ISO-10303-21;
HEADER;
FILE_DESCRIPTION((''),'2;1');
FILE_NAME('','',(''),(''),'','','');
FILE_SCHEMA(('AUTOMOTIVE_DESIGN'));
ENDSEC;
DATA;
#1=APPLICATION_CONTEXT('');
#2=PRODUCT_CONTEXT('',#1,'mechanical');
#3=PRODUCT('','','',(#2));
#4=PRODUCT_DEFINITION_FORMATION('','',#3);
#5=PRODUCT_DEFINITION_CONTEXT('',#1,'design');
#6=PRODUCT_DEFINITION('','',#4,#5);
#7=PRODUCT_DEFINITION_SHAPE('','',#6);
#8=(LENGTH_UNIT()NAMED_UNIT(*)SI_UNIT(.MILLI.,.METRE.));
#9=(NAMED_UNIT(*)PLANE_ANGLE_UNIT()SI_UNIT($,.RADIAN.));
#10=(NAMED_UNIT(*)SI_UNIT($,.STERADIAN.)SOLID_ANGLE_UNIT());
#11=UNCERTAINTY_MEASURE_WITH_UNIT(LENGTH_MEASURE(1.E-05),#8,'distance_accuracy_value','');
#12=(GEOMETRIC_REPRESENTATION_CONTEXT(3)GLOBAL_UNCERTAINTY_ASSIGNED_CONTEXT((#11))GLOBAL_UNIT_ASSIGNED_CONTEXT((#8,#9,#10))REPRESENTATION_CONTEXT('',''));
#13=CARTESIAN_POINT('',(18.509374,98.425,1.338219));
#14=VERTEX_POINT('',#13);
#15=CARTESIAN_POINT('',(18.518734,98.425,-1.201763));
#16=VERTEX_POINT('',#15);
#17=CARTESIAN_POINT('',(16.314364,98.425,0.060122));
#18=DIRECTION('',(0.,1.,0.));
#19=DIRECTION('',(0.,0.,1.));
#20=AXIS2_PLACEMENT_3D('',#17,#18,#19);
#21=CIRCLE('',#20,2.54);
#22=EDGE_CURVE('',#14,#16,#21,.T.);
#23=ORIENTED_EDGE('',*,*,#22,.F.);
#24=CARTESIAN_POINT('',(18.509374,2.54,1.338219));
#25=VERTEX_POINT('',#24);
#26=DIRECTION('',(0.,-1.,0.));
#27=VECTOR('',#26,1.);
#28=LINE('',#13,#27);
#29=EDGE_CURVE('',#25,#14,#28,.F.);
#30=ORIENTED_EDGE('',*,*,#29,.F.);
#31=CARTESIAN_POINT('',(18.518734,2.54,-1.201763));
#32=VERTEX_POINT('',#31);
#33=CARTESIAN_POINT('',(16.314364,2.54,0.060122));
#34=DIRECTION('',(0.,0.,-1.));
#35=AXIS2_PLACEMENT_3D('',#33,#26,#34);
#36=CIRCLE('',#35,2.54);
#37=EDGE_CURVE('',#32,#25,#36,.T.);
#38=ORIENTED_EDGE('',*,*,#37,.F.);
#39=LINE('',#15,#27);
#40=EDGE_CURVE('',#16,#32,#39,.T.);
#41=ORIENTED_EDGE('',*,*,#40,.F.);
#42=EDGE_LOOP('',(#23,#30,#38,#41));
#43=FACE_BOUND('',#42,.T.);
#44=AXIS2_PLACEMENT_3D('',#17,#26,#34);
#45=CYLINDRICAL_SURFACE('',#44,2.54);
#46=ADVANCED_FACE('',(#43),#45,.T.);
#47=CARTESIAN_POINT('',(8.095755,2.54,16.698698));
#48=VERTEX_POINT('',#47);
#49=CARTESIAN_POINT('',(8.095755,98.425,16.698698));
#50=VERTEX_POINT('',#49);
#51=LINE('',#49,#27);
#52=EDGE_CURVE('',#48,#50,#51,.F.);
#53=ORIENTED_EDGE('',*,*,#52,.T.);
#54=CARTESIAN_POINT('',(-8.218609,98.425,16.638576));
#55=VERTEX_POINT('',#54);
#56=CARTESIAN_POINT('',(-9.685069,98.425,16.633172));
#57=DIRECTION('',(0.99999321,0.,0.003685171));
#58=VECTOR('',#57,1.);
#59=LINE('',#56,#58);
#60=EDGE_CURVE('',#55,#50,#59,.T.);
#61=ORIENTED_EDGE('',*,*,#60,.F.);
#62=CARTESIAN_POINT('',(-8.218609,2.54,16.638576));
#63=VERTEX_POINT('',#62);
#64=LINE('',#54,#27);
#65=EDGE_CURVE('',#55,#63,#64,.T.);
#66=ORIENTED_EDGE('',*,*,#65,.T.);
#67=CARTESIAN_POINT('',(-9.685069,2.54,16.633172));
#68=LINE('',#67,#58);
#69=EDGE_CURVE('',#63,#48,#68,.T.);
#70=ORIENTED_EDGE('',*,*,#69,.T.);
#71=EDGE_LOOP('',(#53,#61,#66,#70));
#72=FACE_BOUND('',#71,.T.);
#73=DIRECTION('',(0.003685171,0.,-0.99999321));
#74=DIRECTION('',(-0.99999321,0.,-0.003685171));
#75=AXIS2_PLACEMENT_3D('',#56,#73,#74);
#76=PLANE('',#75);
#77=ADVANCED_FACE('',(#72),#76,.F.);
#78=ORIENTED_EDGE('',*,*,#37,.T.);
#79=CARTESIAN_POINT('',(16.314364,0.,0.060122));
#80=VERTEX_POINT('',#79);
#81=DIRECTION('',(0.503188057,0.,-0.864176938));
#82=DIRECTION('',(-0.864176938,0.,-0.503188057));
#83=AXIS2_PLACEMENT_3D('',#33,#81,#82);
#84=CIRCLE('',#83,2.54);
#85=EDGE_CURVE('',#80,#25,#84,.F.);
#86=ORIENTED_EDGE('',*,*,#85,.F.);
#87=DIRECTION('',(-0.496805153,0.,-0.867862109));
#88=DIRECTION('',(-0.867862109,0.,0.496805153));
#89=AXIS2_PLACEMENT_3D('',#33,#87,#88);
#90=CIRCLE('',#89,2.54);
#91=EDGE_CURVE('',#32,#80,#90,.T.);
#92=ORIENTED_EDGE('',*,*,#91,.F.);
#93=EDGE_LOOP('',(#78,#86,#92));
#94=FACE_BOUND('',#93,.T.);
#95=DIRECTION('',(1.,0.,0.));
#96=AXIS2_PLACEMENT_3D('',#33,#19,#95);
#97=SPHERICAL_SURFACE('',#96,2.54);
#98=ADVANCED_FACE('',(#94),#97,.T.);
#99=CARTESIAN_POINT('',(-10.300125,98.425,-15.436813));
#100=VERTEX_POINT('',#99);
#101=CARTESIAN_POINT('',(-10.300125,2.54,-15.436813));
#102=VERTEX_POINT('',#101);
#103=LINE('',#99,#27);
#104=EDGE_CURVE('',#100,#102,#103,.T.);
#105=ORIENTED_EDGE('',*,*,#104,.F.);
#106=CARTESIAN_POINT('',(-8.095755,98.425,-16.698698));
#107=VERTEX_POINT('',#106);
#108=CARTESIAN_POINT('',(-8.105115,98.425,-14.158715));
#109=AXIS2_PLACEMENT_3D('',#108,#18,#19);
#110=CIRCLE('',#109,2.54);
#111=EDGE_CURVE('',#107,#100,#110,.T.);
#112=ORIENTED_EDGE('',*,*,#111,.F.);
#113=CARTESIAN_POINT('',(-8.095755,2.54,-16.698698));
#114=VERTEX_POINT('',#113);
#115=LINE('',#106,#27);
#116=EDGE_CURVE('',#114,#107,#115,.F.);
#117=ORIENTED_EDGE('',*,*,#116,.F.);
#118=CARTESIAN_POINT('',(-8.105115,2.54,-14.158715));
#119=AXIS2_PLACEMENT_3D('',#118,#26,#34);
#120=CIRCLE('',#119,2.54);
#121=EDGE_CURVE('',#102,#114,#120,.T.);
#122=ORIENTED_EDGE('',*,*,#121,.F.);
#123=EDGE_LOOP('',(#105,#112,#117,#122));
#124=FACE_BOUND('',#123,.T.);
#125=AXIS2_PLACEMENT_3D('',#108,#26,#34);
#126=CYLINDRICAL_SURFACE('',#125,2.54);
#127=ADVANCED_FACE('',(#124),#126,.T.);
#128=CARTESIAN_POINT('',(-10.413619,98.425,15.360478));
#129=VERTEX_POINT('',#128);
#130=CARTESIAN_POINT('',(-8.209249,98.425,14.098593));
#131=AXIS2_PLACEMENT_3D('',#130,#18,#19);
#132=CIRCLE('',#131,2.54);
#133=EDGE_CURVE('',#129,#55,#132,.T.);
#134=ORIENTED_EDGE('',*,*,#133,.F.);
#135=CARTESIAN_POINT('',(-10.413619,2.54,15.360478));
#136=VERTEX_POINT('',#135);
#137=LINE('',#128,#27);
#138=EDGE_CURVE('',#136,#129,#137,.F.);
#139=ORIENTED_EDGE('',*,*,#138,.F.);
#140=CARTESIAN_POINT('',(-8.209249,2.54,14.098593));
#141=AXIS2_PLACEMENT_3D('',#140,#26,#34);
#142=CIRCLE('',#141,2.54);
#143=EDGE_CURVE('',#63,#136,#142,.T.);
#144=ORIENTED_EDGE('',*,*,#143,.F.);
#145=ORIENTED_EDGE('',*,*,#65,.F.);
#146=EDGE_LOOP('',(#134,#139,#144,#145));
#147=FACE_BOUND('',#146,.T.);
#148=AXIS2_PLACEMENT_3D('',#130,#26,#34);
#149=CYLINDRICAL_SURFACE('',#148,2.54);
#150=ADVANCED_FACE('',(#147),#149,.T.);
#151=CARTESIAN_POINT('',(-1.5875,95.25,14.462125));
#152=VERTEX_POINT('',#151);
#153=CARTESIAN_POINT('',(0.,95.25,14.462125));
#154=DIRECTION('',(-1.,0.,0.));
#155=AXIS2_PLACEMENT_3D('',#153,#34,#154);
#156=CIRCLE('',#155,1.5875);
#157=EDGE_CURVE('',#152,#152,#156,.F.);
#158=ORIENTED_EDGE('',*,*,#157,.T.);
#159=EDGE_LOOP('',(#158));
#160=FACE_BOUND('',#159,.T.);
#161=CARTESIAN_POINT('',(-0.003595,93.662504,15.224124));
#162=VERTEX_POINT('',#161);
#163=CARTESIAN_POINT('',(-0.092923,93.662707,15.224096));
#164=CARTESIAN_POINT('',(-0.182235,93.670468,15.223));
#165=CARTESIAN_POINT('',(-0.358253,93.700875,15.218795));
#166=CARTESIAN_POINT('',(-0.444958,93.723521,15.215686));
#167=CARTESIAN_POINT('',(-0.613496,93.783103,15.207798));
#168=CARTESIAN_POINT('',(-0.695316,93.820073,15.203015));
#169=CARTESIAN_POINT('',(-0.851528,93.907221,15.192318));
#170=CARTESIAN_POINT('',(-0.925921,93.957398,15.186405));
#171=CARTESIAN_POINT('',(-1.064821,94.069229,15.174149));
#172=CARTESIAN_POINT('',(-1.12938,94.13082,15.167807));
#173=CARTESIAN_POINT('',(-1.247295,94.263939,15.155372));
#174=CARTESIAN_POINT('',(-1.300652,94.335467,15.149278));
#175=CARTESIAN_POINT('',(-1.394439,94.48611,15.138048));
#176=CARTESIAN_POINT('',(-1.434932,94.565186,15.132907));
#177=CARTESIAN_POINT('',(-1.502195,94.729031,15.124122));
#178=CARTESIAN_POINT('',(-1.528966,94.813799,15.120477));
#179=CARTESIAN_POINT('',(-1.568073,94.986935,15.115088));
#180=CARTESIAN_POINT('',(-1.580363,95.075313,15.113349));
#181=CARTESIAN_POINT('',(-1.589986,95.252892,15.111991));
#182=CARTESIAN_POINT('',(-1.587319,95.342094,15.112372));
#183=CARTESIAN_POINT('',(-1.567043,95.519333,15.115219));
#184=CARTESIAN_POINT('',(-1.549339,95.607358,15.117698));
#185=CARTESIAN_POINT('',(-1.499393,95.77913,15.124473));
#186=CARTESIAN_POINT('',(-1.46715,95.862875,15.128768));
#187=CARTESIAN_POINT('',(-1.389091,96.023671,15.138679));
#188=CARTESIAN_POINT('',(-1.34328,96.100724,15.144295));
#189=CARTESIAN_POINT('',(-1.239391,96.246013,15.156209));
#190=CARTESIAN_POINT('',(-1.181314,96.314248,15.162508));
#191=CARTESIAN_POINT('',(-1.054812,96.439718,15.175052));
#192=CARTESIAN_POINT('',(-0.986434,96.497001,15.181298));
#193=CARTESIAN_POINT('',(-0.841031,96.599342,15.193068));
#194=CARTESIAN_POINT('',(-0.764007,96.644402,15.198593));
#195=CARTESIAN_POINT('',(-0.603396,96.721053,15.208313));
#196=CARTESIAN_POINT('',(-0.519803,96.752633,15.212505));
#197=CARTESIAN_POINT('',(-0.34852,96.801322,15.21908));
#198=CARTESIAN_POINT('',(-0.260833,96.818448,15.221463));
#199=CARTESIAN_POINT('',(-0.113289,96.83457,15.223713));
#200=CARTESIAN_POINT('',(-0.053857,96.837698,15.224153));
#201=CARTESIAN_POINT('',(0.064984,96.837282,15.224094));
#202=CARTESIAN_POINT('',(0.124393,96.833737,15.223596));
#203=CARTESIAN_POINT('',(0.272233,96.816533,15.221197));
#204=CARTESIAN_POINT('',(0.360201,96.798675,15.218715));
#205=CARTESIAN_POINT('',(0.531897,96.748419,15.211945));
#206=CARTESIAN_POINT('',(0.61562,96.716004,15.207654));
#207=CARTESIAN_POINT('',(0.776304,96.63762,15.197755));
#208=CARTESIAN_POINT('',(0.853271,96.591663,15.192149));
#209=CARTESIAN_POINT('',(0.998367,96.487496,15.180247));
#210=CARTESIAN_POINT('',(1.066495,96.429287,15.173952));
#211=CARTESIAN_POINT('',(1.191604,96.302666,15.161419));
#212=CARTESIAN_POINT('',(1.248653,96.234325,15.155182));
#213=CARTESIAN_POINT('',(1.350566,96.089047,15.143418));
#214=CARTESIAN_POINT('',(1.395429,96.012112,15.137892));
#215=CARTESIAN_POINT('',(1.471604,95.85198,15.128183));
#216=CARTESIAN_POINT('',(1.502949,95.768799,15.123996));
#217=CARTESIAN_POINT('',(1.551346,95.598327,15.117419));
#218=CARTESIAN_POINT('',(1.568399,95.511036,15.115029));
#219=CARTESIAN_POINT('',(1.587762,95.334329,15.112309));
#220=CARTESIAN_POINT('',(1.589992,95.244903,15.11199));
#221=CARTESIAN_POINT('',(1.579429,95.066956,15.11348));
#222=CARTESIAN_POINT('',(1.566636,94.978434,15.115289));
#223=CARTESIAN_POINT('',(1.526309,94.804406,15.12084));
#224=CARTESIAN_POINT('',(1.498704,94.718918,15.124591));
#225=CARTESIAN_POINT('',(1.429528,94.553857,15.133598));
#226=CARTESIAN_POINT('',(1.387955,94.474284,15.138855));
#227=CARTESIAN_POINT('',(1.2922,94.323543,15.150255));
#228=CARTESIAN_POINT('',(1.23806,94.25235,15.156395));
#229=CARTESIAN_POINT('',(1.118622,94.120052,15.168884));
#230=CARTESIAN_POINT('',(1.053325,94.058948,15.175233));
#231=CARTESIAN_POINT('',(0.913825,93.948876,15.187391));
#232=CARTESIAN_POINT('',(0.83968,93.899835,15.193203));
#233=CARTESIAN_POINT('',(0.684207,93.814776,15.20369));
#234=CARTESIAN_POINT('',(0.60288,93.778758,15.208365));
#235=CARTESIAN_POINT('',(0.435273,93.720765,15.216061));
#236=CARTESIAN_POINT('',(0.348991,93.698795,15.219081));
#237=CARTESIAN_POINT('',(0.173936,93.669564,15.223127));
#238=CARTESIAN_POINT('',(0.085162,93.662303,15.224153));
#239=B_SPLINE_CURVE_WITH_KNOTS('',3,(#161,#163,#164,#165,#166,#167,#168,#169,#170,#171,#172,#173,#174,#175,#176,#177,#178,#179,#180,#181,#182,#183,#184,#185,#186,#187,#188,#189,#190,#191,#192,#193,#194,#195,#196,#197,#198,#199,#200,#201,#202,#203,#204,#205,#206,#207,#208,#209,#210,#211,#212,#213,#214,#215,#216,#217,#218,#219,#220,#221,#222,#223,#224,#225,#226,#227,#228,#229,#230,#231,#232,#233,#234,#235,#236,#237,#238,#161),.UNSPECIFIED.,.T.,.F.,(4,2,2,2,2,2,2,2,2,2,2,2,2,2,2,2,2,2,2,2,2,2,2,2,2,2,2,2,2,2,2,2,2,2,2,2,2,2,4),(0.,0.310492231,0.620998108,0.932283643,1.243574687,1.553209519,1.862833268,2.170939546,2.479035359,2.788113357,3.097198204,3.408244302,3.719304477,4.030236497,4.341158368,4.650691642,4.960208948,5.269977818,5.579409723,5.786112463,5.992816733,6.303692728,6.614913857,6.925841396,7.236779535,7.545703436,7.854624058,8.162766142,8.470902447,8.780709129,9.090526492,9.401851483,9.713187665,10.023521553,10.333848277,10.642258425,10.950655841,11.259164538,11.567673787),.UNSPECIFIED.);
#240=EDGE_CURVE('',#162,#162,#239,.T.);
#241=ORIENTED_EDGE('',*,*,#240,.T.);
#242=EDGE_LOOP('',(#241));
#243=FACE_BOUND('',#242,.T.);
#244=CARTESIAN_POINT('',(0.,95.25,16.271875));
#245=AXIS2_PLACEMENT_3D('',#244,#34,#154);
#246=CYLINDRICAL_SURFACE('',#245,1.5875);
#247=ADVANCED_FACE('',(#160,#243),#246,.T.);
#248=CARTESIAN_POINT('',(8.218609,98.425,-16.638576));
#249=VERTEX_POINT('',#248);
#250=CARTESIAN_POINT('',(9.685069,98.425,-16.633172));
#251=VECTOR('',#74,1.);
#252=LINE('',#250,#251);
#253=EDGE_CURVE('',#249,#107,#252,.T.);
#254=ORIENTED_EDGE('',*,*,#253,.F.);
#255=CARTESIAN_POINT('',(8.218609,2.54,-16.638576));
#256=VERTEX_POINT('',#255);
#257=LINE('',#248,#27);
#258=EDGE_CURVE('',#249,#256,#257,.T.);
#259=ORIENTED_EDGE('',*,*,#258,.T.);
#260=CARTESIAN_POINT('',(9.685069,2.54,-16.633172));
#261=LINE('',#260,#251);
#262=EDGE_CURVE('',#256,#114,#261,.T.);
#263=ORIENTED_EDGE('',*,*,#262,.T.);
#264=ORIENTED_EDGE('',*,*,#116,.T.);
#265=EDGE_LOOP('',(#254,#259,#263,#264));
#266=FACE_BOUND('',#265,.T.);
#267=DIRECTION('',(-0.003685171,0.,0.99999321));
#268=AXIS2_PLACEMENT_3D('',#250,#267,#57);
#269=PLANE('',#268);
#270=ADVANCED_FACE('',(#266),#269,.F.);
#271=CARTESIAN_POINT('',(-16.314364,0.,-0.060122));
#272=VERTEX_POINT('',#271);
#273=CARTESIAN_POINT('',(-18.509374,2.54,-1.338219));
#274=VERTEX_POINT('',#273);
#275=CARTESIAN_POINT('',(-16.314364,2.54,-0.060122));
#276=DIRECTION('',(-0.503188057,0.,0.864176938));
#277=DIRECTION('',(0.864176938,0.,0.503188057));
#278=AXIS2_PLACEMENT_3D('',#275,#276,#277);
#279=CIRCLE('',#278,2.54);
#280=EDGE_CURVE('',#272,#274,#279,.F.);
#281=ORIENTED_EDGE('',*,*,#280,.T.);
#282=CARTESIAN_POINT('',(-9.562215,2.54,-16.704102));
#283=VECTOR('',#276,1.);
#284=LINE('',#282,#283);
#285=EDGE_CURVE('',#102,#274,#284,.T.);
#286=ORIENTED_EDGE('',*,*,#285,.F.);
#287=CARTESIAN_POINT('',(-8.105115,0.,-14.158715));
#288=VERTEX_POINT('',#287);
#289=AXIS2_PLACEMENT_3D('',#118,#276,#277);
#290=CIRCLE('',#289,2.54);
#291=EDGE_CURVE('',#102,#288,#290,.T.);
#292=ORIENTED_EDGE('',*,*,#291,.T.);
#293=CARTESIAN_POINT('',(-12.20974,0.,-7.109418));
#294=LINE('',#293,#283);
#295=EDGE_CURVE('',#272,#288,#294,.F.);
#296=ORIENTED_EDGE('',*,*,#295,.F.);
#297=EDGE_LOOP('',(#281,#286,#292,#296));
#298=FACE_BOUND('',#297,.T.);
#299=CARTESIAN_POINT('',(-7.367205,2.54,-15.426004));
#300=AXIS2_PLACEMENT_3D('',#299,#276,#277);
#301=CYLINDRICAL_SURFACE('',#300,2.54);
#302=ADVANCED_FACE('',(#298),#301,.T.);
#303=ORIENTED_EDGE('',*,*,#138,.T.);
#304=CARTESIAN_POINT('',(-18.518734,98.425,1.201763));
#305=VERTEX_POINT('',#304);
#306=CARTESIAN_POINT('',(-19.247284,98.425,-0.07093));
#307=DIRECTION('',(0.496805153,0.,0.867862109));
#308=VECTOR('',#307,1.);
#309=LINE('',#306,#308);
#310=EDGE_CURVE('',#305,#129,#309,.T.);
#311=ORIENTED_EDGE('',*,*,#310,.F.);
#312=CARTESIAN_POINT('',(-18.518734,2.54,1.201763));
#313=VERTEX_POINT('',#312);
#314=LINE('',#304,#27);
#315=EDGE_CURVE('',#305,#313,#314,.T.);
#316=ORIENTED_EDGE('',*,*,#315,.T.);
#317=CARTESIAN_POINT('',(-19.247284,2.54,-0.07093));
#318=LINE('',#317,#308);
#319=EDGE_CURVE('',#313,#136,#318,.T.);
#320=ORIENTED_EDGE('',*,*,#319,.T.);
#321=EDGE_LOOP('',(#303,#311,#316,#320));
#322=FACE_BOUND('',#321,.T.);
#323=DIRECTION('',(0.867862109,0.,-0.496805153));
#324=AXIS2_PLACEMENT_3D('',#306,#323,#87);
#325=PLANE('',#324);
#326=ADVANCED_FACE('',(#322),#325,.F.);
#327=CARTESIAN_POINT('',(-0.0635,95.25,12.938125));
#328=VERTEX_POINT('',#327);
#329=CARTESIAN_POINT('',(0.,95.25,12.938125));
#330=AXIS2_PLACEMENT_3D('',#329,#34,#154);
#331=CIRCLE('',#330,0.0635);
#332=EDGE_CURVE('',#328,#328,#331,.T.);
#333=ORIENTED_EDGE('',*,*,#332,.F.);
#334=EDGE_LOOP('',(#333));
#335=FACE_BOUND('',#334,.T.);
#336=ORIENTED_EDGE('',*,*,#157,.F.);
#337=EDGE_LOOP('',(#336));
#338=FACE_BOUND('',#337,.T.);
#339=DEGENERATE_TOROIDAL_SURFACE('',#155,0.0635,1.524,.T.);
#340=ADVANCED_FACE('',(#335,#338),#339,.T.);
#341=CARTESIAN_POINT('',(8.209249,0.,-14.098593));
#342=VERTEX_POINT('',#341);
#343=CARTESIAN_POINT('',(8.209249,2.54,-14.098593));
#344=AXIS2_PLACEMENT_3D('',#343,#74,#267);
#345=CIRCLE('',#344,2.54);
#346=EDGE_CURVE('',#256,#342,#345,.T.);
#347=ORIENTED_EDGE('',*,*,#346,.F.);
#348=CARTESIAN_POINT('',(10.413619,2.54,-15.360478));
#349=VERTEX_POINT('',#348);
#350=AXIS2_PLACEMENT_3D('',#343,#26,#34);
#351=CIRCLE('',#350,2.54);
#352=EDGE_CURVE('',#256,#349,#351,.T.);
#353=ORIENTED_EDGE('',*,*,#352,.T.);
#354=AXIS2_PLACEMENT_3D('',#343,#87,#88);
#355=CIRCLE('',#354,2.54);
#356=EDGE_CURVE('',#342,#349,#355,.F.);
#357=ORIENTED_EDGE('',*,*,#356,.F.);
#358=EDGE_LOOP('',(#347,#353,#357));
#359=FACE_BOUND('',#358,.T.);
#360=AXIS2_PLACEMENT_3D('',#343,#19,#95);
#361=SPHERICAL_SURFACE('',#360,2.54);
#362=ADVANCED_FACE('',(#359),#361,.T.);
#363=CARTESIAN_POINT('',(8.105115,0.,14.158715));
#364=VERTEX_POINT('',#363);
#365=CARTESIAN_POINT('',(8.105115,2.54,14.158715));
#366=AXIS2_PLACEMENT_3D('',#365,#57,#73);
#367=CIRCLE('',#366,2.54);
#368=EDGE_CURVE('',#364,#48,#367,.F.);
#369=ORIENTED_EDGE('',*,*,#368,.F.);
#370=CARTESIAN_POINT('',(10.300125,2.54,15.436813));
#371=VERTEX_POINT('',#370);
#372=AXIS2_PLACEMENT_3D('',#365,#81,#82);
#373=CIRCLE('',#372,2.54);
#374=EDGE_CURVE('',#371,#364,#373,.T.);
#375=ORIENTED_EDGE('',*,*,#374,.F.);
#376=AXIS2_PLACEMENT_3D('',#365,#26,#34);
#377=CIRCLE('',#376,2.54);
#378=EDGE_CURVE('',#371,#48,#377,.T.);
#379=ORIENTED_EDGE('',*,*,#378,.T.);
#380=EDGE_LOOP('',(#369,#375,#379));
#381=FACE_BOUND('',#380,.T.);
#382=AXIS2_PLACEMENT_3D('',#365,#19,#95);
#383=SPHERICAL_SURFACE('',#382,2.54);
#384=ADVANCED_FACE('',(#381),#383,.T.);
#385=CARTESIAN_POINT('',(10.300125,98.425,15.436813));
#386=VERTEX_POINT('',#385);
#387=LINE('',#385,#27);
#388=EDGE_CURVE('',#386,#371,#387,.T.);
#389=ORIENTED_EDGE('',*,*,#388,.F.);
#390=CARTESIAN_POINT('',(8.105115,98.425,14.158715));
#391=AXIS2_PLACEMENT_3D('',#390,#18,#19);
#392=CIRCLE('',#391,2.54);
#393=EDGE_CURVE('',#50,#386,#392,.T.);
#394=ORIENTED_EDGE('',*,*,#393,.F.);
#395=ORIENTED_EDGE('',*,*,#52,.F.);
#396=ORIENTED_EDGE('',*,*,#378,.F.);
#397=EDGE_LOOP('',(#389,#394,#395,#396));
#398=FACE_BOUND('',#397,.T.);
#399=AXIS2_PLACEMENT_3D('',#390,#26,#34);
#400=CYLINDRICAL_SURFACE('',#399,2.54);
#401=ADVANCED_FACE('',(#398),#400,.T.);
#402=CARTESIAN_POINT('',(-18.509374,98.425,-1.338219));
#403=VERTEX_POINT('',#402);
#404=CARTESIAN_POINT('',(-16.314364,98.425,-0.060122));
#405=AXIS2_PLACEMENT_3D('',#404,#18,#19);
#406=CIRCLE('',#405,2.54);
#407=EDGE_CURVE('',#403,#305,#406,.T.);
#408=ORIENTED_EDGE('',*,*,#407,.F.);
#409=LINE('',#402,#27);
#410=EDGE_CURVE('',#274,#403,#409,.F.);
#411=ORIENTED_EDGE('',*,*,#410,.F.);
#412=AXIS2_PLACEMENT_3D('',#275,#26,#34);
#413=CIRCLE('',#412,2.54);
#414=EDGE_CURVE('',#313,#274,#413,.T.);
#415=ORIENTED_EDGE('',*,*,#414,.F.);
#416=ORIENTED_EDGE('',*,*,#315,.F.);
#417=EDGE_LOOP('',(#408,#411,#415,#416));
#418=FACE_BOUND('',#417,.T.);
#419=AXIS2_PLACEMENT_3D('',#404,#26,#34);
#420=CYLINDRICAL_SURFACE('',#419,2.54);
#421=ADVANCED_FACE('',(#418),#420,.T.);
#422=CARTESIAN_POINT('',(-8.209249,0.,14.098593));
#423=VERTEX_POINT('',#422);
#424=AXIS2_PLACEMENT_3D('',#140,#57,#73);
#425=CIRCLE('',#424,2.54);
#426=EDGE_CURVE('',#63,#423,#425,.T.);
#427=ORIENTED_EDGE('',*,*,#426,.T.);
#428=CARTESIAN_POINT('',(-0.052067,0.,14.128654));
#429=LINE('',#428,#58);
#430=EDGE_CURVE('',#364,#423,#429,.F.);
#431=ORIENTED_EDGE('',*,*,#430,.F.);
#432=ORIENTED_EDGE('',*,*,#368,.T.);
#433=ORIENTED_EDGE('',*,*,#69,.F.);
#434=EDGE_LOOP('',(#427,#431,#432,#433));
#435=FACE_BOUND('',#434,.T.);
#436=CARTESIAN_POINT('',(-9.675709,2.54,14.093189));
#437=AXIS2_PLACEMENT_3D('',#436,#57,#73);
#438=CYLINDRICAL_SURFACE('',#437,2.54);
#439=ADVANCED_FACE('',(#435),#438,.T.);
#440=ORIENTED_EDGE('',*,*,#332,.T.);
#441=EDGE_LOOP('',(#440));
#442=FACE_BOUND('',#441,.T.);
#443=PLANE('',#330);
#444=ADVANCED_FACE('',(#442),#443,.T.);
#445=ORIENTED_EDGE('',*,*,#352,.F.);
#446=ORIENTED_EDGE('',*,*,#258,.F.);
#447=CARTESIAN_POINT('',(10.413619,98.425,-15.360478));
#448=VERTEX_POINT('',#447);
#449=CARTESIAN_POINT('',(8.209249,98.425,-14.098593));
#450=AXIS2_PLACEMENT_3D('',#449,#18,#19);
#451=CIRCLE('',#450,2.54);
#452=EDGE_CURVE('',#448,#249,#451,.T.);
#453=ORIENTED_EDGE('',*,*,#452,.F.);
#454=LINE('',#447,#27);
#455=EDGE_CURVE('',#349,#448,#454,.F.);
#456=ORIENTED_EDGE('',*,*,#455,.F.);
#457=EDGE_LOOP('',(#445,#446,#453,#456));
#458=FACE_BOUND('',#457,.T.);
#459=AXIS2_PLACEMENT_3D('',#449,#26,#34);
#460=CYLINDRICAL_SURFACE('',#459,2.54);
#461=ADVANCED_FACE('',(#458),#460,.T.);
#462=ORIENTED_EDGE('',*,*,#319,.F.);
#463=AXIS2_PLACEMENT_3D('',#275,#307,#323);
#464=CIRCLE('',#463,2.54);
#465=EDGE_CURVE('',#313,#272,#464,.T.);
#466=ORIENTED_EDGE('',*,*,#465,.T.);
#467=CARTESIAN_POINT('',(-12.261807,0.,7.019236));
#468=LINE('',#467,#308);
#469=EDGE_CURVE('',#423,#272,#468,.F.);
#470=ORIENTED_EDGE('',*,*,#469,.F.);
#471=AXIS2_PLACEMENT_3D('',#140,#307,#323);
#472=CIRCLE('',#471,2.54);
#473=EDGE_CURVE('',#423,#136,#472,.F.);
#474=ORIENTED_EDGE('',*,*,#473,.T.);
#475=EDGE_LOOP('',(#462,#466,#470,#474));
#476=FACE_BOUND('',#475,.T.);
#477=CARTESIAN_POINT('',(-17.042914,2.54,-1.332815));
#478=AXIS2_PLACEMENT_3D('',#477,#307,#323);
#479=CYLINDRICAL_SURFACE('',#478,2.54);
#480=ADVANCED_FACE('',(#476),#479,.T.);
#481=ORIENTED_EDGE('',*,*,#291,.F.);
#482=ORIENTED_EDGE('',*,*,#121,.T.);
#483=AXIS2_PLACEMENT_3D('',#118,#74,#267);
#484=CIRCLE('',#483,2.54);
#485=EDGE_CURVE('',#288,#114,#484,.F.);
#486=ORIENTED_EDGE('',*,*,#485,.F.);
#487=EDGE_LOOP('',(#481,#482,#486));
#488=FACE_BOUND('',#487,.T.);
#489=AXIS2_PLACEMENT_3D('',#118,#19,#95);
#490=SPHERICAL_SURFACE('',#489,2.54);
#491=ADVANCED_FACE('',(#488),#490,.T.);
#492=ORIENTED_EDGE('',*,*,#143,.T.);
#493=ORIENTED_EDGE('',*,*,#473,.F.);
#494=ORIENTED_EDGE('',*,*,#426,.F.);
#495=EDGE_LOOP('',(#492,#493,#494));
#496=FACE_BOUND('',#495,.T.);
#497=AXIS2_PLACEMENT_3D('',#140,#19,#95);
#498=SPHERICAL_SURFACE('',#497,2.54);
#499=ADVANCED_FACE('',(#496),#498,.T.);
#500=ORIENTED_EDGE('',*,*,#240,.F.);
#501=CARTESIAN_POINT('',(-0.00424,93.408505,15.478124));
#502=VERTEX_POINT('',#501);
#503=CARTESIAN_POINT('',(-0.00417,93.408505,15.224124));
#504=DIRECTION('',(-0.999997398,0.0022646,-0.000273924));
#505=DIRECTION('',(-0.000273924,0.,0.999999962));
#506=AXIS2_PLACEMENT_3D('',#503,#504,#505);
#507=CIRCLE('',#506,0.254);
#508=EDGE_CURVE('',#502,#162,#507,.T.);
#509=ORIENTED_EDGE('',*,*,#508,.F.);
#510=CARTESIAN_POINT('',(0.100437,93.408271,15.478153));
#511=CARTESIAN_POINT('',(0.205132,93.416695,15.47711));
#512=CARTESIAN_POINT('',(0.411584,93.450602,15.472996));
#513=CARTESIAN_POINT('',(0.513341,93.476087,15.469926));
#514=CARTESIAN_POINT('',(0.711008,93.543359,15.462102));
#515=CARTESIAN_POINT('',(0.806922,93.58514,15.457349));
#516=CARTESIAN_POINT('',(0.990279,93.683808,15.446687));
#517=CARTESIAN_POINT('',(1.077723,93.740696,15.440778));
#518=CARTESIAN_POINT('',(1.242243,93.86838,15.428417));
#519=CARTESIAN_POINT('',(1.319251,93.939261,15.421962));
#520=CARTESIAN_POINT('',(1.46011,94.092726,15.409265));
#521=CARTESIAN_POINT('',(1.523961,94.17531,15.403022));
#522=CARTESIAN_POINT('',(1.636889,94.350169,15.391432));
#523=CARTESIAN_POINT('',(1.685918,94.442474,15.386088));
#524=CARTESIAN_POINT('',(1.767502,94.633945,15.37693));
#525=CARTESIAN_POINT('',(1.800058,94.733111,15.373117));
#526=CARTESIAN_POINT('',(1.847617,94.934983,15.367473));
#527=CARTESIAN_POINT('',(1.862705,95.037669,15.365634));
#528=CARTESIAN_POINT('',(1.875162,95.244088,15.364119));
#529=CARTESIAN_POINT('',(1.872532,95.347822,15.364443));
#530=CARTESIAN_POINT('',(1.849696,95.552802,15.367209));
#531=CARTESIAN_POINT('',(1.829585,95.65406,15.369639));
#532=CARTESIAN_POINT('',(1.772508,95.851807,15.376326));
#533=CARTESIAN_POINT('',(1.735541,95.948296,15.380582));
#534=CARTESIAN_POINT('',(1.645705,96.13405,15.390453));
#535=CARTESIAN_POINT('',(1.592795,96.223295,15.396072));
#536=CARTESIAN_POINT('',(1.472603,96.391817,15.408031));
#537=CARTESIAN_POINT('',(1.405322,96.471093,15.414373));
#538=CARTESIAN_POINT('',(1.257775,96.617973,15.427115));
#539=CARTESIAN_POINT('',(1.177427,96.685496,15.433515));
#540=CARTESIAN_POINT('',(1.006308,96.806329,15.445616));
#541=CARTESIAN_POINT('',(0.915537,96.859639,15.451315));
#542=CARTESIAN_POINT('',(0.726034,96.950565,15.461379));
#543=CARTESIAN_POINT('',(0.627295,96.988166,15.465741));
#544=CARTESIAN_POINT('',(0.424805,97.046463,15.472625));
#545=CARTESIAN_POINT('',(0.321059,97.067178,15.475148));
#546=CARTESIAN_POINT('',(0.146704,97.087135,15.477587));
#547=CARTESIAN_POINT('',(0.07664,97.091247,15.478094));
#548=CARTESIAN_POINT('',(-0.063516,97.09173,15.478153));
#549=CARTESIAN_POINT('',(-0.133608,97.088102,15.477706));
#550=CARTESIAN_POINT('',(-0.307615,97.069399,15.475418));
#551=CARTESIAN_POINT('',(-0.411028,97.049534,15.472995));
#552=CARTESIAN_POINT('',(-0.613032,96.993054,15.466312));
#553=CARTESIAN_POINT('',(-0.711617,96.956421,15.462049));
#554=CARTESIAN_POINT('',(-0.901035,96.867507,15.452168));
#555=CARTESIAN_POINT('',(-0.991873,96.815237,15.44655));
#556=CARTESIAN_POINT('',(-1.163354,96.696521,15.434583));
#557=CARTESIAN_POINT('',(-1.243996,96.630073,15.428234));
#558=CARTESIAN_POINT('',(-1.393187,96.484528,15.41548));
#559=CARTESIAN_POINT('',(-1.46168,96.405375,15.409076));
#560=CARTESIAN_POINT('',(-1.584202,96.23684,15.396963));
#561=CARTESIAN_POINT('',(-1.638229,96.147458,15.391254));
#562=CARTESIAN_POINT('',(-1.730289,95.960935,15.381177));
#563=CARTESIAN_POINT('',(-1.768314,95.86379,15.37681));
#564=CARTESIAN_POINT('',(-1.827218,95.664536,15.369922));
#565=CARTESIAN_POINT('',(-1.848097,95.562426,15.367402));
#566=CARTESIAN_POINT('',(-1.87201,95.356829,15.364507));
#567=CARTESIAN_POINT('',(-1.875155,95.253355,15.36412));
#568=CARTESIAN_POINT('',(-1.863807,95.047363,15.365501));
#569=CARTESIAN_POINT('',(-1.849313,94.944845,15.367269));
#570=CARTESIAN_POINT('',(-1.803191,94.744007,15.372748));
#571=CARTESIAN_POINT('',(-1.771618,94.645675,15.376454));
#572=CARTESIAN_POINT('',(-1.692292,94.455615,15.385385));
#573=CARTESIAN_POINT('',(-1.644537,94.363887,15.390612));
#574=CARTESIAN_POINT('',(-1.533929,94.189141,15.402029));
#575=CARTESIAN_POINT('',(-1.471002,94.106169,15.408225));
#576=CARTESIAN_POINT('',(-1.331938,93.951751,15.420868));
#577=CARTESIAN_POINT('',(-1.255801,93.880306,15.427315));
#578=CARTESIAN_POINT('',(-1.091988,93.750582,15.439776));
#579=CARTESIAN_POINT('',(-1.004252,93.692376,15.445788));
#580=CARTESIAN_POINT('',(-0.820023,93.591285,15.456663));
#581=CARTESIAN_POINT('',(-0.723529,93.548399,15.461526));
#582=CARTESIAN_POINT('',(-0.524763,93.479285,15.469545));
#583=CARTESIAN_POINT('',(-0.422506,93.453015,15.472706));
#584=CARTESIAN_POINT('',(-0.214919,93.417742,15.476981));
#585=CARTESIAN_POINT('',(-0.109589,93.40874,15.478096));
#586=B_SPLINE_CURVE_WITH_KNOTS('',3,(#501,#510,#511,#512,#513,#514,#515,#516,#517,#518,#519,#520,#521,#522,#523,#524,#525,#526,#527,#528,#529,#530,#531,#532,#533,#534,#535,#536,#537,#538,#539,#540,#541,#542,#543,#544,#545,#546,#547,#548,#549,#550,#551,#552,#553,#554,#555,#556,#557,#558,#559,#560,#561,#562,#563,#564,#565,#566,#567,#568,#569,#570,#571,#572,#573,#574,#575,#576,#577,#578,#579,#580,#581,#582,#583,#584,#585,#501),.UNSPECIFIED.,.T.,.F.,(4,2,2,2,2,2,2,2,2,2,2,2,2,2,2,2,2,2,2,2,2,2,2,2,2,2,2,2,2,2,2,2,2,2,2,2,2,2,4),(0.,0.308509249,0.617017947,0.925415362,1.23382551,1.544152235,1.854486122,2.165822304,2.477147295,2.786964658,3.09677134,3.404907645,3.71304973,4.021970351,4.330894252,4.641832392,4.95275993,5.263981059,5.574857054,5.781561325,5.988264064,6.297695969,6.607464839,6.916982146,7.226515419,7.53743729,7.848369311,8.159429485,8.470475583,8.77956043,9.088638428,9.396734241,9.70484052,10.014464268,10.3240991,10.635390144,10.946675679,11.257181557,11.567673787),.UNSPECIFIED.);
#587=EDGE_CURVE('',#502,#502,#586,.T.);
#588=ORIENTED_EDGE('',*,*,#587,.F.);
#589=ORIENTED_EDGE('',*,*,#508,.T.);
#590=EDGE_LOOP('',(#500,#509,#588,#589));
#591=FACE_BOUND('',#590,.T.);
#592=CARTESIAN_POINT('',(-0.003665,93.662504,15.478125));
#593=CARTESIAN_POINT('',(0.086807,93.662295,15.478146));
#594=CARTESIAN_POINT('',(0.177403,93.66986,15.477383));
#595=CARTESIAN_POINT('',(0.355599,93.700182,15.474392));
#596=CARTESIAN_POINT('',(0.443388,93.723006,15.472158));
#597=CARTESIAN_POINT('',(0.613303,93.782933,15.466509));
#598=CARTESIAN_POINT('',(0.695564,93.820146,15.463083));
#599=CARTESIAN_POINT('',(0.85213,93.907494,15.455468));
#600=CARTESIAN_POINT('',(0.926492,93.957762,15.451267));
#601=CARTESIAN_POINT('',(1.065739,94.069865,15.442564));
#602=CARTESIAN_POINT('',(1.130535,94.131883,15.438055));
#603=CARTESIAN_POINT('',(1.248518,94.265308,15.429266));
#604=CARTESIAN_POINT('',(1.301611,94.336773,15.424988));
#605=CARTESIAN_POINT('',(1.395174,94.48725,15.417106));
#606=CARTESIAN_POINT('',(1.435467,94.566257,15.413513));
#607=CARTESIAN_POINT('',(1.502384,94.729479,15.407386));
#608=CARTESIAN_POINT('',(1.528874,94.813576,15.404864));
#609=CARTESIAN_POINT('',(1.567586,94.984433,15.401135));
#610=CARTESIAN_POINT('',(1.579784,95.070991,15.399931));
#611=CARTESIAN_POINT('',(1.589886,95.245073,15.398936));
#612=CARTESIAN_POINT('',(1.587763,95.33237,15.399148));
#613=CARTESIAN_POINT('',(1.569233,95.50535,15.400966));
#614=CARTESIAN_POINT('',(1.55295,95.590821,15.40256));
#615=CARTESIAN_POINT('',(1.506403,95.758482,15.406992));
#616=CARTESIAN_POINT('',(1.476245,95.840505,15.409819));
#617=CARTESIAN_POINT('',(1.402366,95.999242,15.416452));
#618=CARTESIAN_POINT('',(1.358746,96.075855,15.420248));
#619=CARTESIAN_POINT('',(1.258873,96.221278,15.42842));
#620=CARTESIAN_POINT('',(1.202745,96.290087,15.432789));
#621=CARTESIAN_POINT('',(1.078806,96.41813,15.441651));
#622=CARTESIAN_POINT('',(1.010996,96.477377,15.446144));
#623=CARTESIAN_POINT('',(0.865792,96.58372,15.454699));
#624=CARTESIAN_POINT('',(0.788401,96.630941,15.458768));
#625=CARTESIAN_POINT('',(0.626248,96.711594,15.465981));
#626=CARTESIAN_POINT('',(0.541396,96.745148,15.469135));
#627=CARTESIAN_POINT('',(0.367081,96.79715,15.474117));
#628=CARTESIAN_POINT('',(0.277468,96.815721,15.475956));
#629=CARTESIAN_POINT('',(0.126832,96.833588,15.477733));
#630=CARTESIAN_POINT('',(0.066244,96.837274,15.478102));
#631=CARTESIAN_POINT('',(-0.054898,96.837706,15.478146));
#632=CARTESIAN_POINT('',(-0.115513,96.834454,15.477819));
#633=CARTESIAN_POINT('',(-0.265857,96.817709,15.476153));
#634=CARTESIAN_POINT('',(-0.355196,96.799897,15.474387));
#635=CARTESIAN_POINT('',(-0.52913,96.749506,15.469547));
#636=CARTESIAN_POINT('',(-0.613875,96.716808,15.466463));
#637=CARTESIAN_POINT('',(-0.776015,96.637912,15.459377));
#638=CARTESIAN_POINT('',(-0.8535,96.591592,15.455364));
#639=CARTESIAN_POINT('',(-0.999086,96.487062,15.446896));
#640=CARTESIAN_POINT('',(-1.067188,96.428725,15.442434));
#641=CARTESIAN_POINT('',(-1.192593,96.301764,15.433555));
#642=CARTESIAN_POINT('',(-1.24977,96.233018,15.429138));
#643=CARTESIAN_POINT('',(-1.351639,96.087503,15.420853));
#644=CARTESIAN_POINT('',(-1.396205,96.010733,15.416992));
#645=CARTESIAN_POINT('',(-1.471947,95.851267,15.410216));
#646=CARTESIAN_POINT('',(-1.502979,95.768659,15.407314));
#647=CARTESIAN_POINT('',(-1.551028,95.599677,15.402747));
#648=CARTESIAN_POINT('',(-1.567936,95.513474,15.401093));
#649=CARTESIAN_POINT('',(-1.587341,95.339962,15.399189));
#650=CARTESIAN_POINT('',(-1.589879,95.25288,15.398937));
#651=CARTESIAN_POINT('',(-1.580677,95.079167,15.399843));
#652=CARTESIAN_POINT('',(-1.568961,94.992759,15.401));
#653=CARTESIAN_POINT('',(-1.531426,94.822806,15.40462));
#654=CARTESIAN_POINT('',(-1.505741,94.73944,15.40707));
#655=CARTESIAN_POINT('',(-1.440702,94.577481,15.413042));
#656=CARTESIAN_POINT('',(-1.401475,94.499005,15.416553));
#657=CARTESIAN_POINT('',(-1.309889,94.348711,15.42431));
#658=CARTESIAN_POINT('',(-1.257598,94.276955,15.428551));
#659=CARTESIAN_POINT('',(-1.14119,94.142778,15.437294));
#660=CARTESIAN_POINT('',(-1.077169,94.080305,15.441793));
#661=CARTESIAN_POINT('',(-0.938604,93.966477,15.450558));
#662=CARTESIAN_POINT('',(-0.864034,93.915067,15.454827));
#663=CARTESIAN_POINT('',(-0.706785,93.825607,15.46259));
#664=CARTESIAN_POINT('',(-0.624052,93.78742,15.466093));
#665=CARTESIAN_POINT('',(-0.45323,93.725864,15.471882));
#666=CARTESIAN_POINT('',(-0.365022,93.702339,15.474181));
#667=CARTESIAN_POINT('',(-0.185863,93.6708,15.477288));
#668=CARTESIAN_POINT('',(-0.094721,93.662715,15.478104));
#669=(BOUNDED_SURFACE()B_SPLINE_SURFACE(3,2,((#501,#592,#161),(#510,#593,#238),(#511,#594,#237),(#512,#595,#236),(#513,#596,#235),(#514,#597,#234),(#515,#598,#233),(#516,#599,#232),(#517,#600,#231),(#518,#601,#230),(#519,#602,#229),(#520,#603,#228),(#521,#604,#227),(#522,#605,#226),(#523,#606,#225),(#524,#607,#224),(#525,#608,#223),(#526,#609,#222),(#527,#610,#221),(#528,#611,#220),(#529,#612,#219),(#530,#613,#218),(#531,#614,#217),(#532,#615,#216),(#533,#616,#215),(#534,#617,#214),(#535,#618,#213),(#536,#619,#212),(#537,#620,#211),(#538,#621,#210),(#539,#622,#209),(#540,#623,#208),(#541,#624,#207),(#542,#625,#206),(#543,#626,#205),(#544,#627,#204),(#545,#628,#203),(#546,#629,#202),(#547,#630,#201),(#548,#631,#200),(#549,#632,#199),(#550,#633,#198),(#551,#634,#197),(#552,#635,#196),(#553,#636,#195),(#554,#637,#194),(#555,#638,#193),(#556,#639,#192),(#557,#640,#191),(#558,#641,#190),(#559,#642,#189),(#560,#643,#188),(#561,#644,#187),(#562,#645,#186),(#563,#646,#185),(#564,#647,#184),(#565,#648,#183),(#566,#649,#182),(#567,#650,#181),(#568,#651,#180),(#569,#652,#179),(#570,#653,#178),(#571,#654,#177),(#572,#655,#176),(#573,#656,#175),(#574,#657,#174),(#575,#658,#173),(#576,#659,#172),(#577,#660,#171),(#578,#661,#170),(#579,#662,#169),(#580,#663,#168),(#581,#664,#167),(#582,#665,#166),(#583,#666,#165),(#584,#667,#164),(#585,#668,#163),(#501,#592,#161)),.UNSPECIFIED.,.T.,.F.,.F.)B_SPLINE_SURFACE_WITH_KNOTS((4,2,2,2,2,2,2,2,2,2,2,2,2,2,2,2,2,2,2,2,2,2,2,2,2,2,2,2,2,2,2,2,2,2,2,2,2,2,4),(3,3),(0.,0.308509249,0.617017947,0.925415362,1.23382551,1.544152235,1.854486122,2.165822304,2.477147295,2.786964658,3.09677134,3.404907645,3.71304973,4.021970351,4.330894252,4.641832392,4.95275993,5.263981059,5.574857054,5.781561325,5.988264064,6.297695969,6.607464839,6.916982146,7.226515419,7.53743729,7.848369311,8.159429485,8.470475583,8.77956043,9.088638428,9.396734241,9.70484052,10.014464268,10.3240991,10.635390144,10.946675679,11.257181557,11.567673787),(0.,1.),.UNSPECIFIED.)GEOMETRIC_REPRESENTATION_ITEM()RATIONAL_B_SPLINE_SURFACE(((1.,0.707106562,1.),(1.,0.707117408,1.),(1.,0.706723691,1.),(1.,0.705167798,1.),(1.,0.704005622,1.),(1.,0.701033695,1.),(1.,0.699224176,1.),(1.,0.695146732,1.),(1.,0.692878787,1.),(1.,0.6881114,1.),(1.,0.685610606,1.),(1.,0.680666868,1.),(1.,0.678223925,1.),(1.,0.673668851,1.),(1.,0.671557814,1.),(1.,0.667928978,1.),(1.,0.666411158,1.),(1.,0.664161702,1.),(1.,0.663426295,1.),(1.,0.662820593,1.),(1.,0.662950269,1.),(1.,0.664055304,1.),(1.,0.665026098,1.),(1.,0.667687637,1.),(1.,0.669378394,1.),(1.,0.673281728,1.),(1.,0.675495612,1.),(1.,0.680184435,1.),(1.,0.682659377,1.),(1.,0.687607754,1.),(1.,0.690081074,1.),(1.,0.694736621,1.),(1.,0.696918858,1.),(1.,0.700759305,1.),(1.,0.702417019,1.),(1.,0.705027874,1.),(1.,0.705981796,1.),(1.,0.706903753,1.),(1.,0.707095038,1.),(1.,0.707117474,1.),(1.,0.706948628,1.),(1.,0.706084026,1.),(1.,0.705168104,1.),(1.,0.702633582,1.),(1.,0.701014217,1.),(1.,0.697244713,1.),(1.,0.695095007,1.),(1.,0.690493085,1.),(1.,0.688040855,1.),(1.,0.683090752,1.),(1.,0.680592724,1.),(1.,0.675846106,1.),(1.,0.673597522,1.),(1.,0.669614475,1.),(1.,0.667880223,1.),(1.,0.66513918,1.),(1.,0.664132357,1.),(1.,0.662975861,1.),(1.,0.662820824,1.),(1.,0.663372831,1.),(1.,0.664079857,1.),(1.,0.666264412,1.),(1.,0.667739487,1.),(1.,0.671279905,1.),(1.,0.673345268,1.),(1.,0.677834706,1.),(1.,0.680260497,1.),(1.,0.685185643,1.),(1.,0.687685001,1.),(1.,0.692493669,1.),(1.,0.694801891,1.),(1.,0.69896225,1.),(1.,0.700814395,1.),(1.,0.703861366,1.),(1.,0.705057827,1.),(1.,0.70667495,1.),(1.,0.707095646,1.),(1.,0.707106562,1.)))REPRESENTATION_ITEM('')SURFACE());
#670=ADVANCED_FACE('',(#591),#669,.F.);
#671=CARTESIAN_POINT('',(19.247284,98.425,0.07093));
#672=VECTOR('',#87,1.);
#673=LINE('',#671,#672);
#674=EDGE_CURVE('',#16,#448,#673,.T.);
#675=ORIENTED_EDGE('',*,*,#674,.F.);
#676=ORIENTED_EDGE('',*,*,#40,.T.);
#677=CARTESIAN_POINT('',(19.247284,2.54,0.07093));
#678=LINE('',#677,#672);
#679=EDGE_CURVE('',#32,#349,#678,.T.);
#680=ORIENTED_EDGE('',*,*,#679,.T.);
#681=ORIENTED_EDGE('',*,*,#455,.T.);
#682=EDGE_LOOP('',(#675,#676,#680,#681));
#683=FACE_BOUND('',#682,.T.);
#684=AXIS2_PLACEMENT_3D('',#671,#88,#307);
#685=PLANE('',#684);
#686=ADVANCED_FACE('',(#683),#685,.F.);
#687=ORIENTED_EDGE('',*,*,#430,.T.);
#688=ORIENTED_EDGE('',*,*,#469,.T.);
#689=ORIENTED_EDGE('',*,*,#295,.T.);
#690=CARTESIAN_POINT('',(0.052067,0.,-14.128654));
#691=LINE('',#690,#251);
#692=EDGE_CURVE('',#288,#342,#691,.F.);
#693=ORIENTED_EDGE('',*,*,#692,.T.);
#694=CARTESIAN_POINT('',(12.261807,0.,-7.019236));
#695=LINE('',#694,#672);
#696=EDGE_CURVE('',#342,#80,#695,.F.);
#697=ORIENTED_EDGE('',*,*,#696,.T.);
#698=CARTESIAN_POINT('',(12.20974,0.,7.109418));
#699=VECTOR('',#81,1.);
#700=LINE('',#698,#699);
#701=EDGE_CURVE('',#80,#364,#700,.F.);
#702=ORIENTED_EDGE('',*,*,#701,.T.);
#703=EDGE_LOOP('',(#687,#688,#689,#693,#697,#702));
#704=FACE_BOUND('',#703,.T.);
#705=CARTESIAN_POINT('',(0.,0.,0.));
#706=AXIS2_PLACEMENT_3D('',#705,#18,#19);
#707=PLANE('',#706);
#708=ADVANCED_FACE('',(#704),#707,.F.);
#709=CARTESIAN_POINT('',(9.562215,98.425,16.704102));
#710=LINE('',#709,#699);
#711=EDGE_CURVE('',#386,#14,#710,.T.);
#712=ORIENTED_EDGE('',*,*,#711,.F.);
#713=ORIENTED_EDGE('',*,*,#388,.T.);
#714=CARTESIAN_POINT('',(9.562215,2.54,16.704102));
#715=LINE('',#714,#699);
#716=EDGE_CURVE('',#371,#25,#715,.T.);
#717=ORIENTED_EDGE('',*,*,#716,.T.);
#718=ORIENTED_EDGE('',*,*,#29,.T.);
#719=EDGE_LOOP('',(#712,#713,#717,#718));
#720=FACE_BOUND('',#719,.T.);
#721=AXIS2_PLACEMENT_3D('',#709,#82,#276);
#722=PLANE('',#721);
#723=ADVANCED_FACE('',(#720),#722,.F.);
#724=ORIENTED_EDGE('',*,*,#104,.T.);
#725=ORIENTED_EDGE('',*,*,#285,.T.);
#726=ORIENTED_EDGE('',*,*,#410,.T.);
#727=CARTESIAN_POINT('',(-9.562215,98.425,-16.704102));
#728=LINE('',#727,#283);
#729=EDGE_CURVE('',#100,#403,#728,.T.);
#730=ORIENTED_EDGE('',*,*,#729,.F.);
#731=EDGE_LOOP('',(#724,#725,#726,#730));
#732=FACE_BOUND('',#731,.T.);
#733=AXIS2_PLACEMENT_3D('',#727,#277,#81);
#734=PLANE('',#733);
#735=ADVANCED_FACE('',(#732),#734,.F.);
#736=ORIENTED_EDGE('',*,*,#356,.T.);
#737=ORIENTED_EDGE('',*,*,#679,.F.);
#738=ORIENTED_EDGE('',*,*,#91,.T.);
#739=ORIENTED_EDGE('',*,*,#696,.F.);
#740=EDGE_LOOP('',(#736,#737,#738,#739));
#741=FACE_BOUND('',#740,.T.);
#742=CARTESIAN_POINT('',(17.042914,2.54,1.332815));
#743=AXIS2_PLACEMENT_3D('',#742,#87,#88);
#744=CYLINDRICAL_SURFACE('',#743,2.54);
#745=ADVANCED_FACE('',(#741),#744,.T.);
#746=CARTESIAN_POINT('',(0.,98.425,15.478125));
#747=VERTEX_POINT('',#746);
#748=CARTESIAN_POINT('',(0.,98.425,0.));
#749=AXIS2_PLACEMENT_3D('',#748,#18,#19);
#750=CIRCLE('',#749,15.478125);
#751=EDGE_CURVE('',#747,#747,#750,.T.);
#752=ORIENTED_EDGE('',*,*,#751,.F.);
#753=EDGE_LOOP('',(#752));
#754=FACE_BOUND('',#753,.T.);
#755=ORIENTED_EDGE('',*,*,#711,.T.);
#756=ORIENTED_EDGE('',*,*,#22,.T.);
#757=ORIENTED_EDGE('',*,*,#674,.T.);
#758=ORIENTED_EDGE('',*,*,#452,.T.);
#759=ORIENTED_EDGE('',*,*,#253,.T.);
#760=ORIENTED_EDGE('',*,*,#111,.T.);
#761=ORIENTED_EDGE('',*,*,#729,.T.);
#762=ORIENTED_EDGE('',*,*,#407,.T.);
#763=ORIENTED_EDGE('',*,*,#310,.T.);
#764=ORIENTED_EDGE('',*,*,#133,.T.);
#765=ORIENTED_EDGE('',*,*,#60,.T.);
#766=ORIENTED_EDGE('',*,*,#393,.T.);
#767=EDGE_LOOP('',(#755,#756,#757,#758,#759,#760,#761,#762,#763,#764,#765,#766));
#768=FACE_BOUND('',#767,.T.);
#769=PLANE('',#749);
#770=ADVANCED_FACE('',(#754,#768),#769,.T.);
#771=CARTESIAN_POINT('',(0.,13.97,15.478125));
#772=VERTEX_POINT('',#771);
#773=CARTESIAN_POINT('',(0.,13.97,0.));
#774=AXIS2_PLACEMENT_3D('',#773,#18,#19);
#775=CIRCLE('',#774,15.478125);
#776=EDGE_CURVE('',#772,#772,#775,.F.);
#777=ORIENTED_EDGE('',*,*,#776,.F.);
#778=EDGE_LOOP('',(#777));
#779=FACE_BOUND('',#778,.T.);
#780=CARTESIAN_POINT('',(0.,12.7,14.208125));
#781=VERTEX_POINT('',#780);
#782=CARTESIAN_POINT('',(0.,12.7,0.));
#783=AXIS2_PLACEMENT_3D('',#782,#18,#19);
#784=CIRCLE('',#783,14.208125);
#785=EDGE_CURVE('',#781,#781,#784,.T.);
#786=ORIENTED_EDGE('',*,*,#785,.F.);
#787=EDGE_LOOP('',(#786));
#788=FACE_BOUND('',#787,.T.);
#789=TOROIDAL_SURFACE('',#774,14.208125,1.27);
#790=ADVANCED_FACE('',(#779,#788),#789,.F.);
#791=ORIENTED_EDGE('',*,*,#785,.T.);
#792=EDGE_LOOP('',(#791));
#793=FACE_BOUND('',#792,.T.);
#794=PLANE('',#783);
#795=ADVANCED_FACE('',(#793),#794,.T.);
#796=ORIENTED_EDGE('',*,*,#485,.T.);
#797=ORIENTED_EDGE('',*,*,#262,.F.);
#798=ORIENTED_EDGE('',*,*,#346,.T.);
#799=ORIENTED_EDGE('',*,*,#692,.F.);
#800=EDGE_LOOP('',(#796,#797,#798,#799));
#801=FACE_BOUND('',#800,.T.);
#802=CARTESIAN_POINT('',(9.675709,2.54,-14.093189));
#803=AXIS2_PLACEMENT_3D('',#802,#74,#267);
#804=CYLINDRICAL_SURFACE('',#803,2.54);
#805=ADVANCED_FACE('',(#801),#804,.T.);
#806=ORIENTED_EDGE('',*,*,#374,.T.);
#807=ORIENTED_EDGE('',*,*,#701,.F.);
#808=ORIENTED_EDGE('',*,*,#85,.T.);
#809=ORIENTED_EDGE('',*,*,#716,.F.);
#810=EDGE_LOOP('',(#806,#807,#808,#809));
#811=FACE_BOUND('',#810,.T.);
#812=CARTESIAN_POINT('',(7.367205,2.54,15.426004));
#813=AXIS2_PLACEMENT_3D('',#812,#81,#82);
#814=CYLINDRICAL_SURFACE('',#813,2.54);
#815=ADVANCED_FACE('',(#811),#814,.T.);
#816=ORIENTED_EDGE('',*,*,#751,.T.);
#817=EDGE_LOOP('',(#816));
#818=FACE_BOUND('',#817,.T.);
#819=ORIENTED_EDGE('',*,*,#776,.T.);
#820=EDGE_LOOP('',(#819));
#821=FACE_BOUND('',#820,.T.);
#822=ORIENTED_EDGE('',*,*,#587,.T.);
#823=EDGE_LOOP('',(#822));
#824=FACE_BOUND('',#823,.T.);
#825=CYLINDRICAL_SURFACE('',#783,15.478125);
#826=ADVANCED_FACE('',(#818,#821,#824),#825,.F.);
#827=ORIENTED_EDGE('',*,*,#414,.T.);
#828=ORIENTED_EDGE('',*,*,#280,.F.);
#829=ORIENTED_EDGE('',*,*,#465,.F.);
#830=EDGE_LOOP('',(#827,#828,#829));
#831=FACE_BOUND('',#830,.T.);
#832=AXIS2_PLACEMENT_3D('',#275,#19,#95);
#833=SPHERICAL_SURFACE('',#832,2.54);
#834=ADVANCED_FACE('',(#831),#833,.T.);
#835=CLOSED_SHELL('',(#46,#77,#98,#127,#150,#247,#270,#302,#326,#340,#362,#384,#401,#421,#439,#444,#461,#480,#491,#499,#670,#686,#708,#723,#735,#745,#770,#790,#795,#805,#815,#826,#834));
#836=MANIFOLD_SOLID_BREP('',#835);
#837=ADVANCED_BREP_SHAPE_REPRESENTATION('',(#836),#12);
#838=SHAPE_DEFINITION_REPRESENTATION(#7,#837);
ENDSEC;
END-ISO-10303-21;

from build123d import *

# Parameters (mm, degrees)
BOSS_EXTRUDE1_DEPTH      = 98.425
SKETCH3_R                = 15.478125
CUT_EXTRUDE1_DEPTH       = 85.725
FILLET1_R                = 1.27
FILLET2_R                = 2.54
FILLET3_R                = 2.54
BOSS_EXTRUDE3_DEPTH      = 0.79375
BOSS_EXTRUDE3_DEPTH_BACK = 3.175
SKETCH7_R                = 1.5875
CUT_EXTRUDE2_START       = -0.635
SKETCH8_R                = 1.5875
CUT_EXTRUDE2_DEPTH       = 0.635
FILLET4_R                = 1.524
FILLET5_R                = 0.254


with BuildPart() as part:
    # Sketch2 → Boss-Extrude1 (new body)
    with BuildSketch(Plane(origin=(0, 0, 0), x_dir=(1, 0, 0), z_dir=(0, 1, 0))):
        Polygon((9.562214756, -16.704101823), (19.247283904, -0.070930017), (9.685069148, 16.633171806), (-9.562214756, 16.704101823), (-19.247283904, 0.070930017), (-9.685069148, -16.633171806), align=None)
    extrude(amount=BOSS_EXTRUDE1_DEPTH)

    # Sketch3 → Cut-Extrude1 (cut)
    with BuildSketch(Plane(origin=(0, 98.425, 0), x_dir=(1, 0, 0), z_dir=(0, 1, 0))):
        with Locations(Location((0, 0, 0), (0, 0, 270))):
            Circle(SKETCH3_R)
    extrude(amount=-CUT_EXTRUDE1_DEPTH, mode=Mode.SUBTRACT)

    # Fillet1
    fillet1_edges = [part.edges().sort_by_distance(p)[0] for p in [
        (0, 12.7, -15.478125),
    ]]
    fillet(fillet1_edges, radius=FILLET1_R)

    # Fillet2
    fillet2_edges = [part.edges().sort_by_distance(p)[0] for p in [
        (-14.466176526, 0, 8.281120895),
        (-14.40474933, 0, -8.38751592),
        (0.061427196, 0, -16.668636815),
        (14.466176526, 0, -8.281120895),
        (14.40474933, 0, 8.38751592),
        (-0.061427196, 0, 16.668636815),
    ]]
    fillet(fillet2_edges, radius=FILLET2_R)

    # Fillet3
    # the kernel refuses this fillet: 2.54 mm, written as the material it takes off along each edge
    with BuildSketch(Plane(origin=(-16.314364452, 2.54, -0.060121633), x_dir=(-0.8678621088062781, 0, 0.49680515305129436), z_dir=(0, -1, 0))) as fillet3_piece_1_section:
        Polygon((0, 0), (FILLET3_R, 0), (FILLET3_R, FILLET3_R * 0.57735026919), (FILLET3_R * 0.5, FILLET3_R * 0.866025403784), align=None)
    fillet3_piece_1 = extrude(amount=FILLET3_R, mode=Mode.PRIVATE)
    fillet3_piece_1 = fillet3_piece_1 - Plane(origin=(-16.314364452, 2.54, -0.060121633), x_dir=(0.9999932097338184, 0, 0.003685171129701924), z_dir=(0, -1, 0)) * Sphere(FILLET3_R, mode=Mode.PRIVATE)
    add(fillet3_piece_1, mode=Mode.SUBTRACT)
    with BuildSketch(Plane(origin=(-8.105115364, 2.54, -14.158714879), x_dir=(0.003685171129702339, 0, -0.9999932097338186), z_dir=(0, -1, 0))) as fillet3_piece_2_section:
        Polygon((0, 0), (FILLET3_R, 0), (FILLET3_R, -FILLET3_R * 0.57735026919), (FILLET3_R * 0.5, -FILLET3_R * 0.866025403784), align=None)
    fillet3_piece_2 = extrude(amount=FILLET3_R, mode=Mode.PRIVATE)
    fillet3_piece_2 = fillet3_piece_2 - Plane(origin=(-8.105115364, 2.54, -14.158714879), x_dir=(0.49680515305129425, 0, 0.867862108806278), z_dir=(0, -1, 0)) * Sphere(FILLET3_R, mode=Mode.PRIVATE)
    add(fillet3_piece_2, mode=Mode.SUBTRACT)
    with BuildSketch(Plane(origin=(-8.209249088, 2.54, 14.098593245), x_dir=(-0.003685171129702708, 0, 0.9999932097338186), z_dir=(0, -1, 0))) as fillet3_piece_3_section:
        Polygon((0, 0), (FILLET3_R, 0), (FILLET3_R, FILLET3_R * 0.57735026919), (FILLET3_R * 0.5, FILLET3_R * 0.866025403784), align=None)
    fillet3_piece_3 = extrude(amount=FILLET3_R, mode=Mode.PRIVATE)
    fillet3_piece_3 = fillet3_piece_3 - Plane(origin=(-8.209249088, 2.54, 14.098593245), x_dir=(0.5031880566825245, 0, -0.8641769376765759), z_dir=(0, -1, 0)) * Sphere(FILLET3_R, mode=Mode.PRIVATE)
    add(fillet3_piece_3, mode=Mode.SUBTRACT)
    with BuildSketch(Plane(origin=(8.209249088, 2.54, -14.098593245), x_dir=(0.8678621088062781, 0, -0.49680515305129436), z_dir=(0, -1, 0))) as fillet3_piece_4_section:
        Polygon((0, 0), (FILLET3_R, 0), (FILLET3_R, -FILLET3_R * 0.57735026919), (FILLET3_R * 0.5, -FILLET3_R * 0.866025403784), align=None)
    fillet3_piece_4 = extrude(amount=FILLET3_R, mode=Mode.PRIVATE)
    fillet3_piece_4 = fillet3_piece_4 - Plane(origin=(8.209249088, 2.54, -14.098593245), x_dir=(-0.5031880566825243, 0, 0.8641769376765759), z_dir=(0, -1, 0)) * Sphere(FILLET3_R, mode=Mode.PRIVATE)
    add(fillet3_piece_4, mode=Mode.SUBTRACT)
    with BuildSketch(Plane(origin=(8.105115364, 2.54, 14.158714879), x_dir=(0.8641769376765761, 0, 0.5031880566825242), z_dir=(0, -1, 0))) as fillet3_piece_5_section:
        Polygon((0, 0), (FILLET3_R, 0), (FILLET3_R, FILLET3_R * 0.57735026919), (FILLET3_R * 0.5, FILLET3_R * 0.866025403784), align=None)
    fillet3_piece_5 = extrude(amount=FILLET3_R, mode=Mode.PRIVATE)
    fillet3_piece_5 = fillet3_piece_5 - Plane(origin=(8.105115364, 2.54, 14.158714879), x_dir=(-0.4968051530512941, 0, -0.8678621088062782), z_dir=(0, -1, 0)) * Sphere(FILLET3_R, mode=Mode.PRIVATE)
    add(fillet3_piece_5, mode=Mode.SUBTRACT)
    with BuildSketch(Plane(origin=(16.314364452, 2.54, 0.060121633), x_dir=(0.8641769376765761, 0, 0.5031880566825242), z_dir=(0, -1, 0))) as fillet3_piece_6_section:
        Polygon((0, 0), (FILLET3_R, 0), (FILLET3_R, -FILLET3_R * 0.57735026919), (FILLET3_R * 0.5, -FILLET3_R * 0.866025403784), align=None)
    fillet3_piece_6 = extrude(amount=FILLET3_R, mode=Mode.PRIVATE)
    fillet3_piece_6 = fillet3_piece_6 - Plane(origin=(16.314364452, 2.54, 0.060121633), x_dir=(-0.9999932097338184, 0, -0.003685171129701988), z_dir=(0, -1, 0)) * Sphere(FILLET3_R, mode=Mode.PRIVATE)
    add(fillet3_piece_6, mode=Mode.SUBTRACT)
    with BuildSketch(Plane(origin=(-9.685069148, 2.54, 16.633171806), x_dir=(0.9999932097338186, 0, 0.0036851711297037465), z_dir=(0, 1, 0)), Plane(origin=(-19.247283904, 2.54, -0.070930017), x_dir=(0.49680515305129397, 0, 0.8678621088062782), z_dir=(0, 1, 0)), Plane(origin=(9.562214756, 2.54, 16.704101823), x_dir=(0.5031880566825245, 0, -0.8641769376765758), z_dir=(0, 1, 0))) as fillet3_piece_7:
        with BuildLine():
            CenterArc((FILLET3_R * 0.57735026919, FILLET3_R), FILLET3_R, 210, 60)
            Line((-FILLET3_R * 0.288675134595, FILLET3_R * 0.5), (0, 0))
            Line((0, 0), (FILLET3_R * 0.57735026919, 0))
        make_face()
    extrude(amount=99.551174209, mode=Mode.SUBTRACT)
    with BuildSketch(Plane(origin=(-9.562214756, 2.54, -16.704101823), x_dir=(0.9999932097338186, 0, 0.003685171129701324), z_dir=(0, 1, 0)), Plane(origin=(9.685069148, 2.54, -16.633171806), x_dir=(0.4968051530512946, 0, 0.8678621088062779), z_dir=(0, 1, 0)), Plane(origin=(19.247283904, 2.54, 0.070930017), x_dir=(-0.503188056682524, 0, 0.8641769376765761), z_dir=(0, 1, 0))) as fillet3_piece_8:
        with BuildLine():
            CenterArc((FILLET3_R * 0.57735026919, -FILLET3_R), FILLET3_R, 90, 60)
            Line((-FILLET3_R * 0.288675134595, -FILLET3_R * 0.5), (0, 0))
            Line((0, 0), (FILLET3_R * 0.57735026919, 0))
        make_face()
    extrude(amount=99.551174209, mode=Mode.SUBTRACT)

    # Sketch7 → Boss-Extrude3 (add, two sides: drawn at the far end of the back side and taken through both)
    with BuildSketch(Plane.XY.offset(15.478125).offset(-BOSS_EXTRUDE3_DEPTH_BACK)):
        with Locations(Location((0, 95.25, 0), (0, 0, 270))):
            Circle(SKETCH7_R)
    extrude(amount=BOSS_EXTRUDE3_DEPTH + BOSS_EXTRUDE3_DEPTH_BACK)

    # Sketch8 → Cut-Extrude2 (cut)
    with BuildSketch(Plane(origin=(0, 0, 12.303125), x_dir=(-1, 0, 0), z_dir=(0, 0, -1)).offset(CUT_EXTRUDE2_START)):
        with Locations((0, 95.25)):
            Circle(SKETCH8_R)
    extrude(amount=CUT_EXTRUDE2_DEPTH, mode=Mode.SUBTRACT)

    # Fillet4
    fillet4_edges = [part.edges().sort_by_distance(p)[0] for p in [
        (0, 96.8375, 12.938125),
    ]]
    fillet(fillet4_edges, radius=FILLET4_R)

    # Fillet5
    fillet5_edges = [part.edges().sort_by_distance(p)[0] for p in [
        (1.5875, 95.25, 15.396499513),
    ]]
    fillet(fillet5_edges, radius=FILLET5_R)


solid = part.part
